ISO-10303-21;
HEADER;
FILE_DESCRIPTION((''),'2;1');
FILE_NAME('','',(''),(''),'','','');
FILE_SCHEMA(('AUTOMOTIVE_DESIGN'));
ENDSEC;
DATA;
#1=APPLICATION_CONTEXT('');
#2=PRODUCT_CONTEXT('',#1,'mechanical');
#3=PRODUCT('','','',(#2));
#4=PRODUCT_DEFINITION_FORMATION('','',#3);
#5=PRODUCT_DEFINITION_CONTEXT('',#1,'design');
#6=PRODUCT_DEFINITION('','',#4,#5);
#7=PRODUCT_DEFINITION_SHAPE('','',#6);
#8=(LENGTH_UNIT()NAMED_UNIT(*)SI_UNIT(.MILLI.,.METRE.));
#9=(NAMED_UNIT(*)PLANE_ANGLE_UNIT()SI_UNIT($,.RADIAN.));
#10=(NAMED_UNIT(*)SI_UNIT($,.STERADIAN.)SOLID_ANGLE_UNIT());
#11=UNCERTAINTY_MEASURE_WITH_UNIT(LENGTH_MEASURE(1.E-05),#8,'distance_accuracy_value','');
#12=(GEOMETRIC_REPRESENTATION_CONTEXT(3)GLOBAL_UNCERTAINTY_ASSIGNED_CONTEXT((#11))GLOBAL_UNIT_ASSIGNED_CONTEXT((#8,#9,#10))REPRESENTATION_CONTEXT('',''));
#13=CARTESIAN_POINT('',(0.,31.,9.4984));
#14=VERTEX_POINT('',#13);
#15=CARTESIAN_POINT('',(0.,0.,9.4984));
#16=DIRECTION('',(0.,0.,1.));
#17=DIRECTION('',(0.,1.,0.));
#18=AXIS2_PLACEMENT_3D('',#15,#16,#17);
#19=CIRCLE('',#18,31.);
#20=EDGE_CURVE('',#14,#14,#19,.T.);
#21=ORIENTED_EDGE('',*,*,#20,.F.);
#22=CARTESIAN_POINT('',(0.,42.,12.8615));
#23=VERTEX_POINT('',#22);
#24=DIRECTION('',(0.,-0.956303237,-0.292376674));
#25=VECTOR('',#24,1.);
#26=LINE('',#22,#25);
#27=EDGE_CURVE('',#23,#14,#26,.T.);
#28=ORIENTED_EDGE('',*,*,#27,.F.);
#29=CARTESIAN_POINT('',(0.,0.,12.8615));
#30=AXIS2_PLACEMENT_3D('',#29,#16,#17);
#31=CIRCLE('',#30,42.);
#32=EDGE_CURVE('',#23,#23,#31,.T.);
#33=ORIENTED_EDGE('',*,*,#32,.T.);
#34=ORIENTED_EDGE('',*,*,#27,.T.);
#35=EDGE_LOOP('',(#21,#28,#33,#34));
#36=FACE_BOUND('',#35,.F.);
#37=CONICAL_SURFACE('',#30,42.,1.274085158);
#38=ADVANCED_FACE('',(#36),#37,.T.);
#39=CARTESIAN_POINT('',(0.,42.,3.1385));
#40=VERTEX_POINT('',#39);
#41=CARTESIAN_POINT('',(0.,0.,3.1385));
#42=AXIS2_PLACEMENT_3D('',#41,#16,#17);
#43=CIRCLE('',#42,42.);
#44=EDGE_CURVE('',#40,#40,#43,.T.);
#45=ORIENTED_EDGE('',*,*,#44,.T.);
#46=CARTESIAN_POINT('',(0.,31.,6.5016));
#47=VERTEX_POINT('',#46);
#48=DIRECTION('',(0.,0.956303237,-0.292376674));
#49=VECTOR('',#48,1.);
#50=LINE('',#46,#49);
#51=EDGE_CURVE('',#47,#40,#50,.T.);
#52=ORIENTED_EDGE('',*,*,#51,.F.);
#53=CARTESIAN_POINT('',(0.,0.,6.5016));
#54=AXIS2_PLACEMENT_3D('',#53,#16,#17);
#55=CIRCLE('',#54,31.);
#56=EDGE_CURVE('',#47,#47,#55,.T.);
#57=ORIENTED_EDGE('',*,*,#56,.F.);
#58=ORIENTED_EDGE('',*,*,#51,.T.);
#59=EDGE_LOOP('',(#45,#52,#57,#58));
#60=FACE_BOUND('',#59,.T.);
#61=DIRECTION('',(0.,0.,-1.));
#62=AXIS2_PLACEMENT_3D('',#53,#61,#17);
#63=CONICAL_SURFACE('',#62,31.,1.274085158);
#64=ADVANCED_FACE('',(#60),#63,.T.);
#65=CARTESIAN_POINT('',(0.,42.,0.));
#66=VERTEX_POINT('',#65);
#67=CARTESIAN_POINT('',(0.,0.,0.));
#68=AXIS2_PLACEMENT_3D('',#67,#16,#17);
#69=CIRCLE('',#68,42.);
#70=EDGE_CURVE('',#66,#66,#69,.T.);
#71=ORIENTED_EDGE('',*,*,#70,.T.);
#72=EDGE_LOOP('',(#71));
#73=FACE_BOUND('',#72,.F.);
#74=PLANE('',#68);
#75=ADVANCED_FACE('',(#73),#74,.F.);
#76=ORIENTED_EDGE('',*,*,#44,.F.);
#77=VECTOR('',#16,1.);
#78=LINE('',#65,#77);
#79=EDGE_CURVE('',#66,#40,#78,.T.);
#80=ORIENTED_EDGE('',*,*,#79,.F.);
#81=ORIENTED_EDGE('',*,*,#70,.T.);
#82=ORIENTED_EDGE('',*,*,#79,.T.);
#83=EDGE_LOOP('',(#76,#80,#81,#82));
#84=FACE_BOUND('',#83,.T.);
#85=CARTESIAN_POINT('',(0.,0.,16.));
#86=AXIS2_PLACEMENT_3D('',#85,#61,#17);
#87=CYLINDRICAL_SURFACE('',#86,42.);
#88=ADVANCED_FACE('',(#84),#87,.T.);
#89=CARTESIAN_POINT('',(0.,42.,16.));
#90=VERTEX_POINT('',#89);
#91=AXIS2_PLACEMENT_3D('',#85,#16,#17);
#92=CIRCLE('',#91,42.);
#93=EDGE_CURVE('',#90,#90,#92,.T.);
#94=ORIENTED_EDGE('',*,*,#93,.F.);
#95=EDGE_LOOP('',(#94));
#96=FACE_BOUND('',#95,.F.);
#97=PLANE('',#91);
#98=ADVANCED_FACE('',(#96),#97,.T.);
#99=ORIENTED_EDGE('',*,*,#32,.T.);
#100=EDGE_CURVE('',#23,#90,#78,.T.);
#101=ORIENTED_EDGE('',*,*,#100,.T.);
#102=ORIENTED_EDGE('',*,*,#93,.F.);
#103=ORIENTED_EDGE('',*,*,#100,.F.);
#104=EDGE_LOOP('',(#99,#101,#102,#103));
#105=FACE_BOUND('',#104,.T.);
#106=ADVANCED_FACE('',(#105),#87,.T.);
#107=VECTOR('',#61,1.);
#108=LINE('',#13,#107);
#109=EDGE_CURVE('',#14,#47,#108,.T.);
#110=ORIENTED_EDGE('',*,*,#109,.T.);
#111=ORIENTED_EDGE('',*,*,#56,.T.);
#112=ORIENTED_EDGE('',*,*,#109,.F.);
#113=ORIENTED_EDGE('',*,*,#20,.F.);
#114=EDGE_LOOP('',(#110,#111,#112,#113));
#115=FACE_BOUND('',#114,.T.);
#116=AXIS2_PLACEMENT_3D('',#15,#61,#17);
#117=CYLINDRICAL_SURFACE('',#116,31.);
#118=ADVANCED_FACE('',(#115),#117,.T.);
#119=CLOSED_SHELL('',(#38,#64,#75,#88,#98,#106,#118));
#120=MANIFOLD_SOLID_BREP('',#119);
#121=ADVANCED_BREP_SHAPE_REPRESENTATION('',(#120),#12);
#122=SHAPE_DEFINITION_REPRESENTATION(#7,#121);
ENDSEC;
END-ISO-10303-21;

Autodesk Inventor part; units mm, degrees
ref_plane "YZ Plane" through (0, 0, 0) normal (1, 0, 0) x (0, 1, 0)
ref_plane "XZ Plane" through (0, 0, 0) normal (0, 1, 0) x (-1, 0, 0)
sketch "Main Sketch" plane through (0, 0, 0) normal (1, 0, 0) x (0, 1, 0)
  line L0 (0, 16) -> (42, 16)
  line L1 (42, 16) -> (42, 12.8615)
  line L2 (42, 12.8615) -> (31, 9.4984)
  line L3 (31, 9.4984) -> (31, 6.5016)
  line L4 (31, 6.5016) -> (42, 3.1385)
  line L5 (42, 3.1385) -> (42, 0)
  line L6 (42, 0) -> (0, 0)
  line L7 (40, 12.25) -> (40, 3.75) construction
  line L8 (31, 8) -> (40, 8) construction
  line L9 (42, 12.8615) -> (42, 3.1385)
  line L10 (0, -4) -> (0, 24) projected
  line L11 (0, 0) -> (0, 16)
  dimension "d0" = 8.5
  dimension "d1" = 34
  dimension "d2" = 2
  dimension "d6" = 16
  dimension "d21" = 80
  dimension "d25" = 11
  dimension "d27" = 8
ref_plane "Belt Plane" through (0, 31, 8) normal (0, 0, 1) x (1, 0, 0)
revolve "Body" add sketch "Main Sketch" angle 360 about axis through (0, 0, -10) along (0, 0, 1)
revolve "Groove" cut sketch "Main Sketch" angle 360 about axis through (0, 0, -10) along (0, 0, 1) contours L9 L4 L3 L2
fillet "Fillet External" [suppressed]
fillet "Fillet Internal" [suppressed]
pattern_of_one "Groove Pattern"
equation "\"d0\" = da_Bw"
equation "\"d1\" = da_Alfa"
equation "\"d2\" = da_c"
equation "\"d21\" = da_Dw"
equation "\"d25\" = da_Hd"
equation "\"d27\" = da_Se"
equation "\"da_r1\" = 0"
equation "\"da_r2\" = 0"
equation "\"d18\" = da_Sg"
equation "\"d5\" = da_Se"
equation "\"da_Bw\" = 8.5"
equation "\"da_Alfa\" = 34deg"
equation "\"da_c\" = 2"
equation "\"da_Dw\" = 80"
equation "\"da_Hd\" = 11"
equation "\"da_Se\" = 8"
equation "\"da_Sg\" = 12"
properties part number "Grooved Pulley1" material "Steel"
